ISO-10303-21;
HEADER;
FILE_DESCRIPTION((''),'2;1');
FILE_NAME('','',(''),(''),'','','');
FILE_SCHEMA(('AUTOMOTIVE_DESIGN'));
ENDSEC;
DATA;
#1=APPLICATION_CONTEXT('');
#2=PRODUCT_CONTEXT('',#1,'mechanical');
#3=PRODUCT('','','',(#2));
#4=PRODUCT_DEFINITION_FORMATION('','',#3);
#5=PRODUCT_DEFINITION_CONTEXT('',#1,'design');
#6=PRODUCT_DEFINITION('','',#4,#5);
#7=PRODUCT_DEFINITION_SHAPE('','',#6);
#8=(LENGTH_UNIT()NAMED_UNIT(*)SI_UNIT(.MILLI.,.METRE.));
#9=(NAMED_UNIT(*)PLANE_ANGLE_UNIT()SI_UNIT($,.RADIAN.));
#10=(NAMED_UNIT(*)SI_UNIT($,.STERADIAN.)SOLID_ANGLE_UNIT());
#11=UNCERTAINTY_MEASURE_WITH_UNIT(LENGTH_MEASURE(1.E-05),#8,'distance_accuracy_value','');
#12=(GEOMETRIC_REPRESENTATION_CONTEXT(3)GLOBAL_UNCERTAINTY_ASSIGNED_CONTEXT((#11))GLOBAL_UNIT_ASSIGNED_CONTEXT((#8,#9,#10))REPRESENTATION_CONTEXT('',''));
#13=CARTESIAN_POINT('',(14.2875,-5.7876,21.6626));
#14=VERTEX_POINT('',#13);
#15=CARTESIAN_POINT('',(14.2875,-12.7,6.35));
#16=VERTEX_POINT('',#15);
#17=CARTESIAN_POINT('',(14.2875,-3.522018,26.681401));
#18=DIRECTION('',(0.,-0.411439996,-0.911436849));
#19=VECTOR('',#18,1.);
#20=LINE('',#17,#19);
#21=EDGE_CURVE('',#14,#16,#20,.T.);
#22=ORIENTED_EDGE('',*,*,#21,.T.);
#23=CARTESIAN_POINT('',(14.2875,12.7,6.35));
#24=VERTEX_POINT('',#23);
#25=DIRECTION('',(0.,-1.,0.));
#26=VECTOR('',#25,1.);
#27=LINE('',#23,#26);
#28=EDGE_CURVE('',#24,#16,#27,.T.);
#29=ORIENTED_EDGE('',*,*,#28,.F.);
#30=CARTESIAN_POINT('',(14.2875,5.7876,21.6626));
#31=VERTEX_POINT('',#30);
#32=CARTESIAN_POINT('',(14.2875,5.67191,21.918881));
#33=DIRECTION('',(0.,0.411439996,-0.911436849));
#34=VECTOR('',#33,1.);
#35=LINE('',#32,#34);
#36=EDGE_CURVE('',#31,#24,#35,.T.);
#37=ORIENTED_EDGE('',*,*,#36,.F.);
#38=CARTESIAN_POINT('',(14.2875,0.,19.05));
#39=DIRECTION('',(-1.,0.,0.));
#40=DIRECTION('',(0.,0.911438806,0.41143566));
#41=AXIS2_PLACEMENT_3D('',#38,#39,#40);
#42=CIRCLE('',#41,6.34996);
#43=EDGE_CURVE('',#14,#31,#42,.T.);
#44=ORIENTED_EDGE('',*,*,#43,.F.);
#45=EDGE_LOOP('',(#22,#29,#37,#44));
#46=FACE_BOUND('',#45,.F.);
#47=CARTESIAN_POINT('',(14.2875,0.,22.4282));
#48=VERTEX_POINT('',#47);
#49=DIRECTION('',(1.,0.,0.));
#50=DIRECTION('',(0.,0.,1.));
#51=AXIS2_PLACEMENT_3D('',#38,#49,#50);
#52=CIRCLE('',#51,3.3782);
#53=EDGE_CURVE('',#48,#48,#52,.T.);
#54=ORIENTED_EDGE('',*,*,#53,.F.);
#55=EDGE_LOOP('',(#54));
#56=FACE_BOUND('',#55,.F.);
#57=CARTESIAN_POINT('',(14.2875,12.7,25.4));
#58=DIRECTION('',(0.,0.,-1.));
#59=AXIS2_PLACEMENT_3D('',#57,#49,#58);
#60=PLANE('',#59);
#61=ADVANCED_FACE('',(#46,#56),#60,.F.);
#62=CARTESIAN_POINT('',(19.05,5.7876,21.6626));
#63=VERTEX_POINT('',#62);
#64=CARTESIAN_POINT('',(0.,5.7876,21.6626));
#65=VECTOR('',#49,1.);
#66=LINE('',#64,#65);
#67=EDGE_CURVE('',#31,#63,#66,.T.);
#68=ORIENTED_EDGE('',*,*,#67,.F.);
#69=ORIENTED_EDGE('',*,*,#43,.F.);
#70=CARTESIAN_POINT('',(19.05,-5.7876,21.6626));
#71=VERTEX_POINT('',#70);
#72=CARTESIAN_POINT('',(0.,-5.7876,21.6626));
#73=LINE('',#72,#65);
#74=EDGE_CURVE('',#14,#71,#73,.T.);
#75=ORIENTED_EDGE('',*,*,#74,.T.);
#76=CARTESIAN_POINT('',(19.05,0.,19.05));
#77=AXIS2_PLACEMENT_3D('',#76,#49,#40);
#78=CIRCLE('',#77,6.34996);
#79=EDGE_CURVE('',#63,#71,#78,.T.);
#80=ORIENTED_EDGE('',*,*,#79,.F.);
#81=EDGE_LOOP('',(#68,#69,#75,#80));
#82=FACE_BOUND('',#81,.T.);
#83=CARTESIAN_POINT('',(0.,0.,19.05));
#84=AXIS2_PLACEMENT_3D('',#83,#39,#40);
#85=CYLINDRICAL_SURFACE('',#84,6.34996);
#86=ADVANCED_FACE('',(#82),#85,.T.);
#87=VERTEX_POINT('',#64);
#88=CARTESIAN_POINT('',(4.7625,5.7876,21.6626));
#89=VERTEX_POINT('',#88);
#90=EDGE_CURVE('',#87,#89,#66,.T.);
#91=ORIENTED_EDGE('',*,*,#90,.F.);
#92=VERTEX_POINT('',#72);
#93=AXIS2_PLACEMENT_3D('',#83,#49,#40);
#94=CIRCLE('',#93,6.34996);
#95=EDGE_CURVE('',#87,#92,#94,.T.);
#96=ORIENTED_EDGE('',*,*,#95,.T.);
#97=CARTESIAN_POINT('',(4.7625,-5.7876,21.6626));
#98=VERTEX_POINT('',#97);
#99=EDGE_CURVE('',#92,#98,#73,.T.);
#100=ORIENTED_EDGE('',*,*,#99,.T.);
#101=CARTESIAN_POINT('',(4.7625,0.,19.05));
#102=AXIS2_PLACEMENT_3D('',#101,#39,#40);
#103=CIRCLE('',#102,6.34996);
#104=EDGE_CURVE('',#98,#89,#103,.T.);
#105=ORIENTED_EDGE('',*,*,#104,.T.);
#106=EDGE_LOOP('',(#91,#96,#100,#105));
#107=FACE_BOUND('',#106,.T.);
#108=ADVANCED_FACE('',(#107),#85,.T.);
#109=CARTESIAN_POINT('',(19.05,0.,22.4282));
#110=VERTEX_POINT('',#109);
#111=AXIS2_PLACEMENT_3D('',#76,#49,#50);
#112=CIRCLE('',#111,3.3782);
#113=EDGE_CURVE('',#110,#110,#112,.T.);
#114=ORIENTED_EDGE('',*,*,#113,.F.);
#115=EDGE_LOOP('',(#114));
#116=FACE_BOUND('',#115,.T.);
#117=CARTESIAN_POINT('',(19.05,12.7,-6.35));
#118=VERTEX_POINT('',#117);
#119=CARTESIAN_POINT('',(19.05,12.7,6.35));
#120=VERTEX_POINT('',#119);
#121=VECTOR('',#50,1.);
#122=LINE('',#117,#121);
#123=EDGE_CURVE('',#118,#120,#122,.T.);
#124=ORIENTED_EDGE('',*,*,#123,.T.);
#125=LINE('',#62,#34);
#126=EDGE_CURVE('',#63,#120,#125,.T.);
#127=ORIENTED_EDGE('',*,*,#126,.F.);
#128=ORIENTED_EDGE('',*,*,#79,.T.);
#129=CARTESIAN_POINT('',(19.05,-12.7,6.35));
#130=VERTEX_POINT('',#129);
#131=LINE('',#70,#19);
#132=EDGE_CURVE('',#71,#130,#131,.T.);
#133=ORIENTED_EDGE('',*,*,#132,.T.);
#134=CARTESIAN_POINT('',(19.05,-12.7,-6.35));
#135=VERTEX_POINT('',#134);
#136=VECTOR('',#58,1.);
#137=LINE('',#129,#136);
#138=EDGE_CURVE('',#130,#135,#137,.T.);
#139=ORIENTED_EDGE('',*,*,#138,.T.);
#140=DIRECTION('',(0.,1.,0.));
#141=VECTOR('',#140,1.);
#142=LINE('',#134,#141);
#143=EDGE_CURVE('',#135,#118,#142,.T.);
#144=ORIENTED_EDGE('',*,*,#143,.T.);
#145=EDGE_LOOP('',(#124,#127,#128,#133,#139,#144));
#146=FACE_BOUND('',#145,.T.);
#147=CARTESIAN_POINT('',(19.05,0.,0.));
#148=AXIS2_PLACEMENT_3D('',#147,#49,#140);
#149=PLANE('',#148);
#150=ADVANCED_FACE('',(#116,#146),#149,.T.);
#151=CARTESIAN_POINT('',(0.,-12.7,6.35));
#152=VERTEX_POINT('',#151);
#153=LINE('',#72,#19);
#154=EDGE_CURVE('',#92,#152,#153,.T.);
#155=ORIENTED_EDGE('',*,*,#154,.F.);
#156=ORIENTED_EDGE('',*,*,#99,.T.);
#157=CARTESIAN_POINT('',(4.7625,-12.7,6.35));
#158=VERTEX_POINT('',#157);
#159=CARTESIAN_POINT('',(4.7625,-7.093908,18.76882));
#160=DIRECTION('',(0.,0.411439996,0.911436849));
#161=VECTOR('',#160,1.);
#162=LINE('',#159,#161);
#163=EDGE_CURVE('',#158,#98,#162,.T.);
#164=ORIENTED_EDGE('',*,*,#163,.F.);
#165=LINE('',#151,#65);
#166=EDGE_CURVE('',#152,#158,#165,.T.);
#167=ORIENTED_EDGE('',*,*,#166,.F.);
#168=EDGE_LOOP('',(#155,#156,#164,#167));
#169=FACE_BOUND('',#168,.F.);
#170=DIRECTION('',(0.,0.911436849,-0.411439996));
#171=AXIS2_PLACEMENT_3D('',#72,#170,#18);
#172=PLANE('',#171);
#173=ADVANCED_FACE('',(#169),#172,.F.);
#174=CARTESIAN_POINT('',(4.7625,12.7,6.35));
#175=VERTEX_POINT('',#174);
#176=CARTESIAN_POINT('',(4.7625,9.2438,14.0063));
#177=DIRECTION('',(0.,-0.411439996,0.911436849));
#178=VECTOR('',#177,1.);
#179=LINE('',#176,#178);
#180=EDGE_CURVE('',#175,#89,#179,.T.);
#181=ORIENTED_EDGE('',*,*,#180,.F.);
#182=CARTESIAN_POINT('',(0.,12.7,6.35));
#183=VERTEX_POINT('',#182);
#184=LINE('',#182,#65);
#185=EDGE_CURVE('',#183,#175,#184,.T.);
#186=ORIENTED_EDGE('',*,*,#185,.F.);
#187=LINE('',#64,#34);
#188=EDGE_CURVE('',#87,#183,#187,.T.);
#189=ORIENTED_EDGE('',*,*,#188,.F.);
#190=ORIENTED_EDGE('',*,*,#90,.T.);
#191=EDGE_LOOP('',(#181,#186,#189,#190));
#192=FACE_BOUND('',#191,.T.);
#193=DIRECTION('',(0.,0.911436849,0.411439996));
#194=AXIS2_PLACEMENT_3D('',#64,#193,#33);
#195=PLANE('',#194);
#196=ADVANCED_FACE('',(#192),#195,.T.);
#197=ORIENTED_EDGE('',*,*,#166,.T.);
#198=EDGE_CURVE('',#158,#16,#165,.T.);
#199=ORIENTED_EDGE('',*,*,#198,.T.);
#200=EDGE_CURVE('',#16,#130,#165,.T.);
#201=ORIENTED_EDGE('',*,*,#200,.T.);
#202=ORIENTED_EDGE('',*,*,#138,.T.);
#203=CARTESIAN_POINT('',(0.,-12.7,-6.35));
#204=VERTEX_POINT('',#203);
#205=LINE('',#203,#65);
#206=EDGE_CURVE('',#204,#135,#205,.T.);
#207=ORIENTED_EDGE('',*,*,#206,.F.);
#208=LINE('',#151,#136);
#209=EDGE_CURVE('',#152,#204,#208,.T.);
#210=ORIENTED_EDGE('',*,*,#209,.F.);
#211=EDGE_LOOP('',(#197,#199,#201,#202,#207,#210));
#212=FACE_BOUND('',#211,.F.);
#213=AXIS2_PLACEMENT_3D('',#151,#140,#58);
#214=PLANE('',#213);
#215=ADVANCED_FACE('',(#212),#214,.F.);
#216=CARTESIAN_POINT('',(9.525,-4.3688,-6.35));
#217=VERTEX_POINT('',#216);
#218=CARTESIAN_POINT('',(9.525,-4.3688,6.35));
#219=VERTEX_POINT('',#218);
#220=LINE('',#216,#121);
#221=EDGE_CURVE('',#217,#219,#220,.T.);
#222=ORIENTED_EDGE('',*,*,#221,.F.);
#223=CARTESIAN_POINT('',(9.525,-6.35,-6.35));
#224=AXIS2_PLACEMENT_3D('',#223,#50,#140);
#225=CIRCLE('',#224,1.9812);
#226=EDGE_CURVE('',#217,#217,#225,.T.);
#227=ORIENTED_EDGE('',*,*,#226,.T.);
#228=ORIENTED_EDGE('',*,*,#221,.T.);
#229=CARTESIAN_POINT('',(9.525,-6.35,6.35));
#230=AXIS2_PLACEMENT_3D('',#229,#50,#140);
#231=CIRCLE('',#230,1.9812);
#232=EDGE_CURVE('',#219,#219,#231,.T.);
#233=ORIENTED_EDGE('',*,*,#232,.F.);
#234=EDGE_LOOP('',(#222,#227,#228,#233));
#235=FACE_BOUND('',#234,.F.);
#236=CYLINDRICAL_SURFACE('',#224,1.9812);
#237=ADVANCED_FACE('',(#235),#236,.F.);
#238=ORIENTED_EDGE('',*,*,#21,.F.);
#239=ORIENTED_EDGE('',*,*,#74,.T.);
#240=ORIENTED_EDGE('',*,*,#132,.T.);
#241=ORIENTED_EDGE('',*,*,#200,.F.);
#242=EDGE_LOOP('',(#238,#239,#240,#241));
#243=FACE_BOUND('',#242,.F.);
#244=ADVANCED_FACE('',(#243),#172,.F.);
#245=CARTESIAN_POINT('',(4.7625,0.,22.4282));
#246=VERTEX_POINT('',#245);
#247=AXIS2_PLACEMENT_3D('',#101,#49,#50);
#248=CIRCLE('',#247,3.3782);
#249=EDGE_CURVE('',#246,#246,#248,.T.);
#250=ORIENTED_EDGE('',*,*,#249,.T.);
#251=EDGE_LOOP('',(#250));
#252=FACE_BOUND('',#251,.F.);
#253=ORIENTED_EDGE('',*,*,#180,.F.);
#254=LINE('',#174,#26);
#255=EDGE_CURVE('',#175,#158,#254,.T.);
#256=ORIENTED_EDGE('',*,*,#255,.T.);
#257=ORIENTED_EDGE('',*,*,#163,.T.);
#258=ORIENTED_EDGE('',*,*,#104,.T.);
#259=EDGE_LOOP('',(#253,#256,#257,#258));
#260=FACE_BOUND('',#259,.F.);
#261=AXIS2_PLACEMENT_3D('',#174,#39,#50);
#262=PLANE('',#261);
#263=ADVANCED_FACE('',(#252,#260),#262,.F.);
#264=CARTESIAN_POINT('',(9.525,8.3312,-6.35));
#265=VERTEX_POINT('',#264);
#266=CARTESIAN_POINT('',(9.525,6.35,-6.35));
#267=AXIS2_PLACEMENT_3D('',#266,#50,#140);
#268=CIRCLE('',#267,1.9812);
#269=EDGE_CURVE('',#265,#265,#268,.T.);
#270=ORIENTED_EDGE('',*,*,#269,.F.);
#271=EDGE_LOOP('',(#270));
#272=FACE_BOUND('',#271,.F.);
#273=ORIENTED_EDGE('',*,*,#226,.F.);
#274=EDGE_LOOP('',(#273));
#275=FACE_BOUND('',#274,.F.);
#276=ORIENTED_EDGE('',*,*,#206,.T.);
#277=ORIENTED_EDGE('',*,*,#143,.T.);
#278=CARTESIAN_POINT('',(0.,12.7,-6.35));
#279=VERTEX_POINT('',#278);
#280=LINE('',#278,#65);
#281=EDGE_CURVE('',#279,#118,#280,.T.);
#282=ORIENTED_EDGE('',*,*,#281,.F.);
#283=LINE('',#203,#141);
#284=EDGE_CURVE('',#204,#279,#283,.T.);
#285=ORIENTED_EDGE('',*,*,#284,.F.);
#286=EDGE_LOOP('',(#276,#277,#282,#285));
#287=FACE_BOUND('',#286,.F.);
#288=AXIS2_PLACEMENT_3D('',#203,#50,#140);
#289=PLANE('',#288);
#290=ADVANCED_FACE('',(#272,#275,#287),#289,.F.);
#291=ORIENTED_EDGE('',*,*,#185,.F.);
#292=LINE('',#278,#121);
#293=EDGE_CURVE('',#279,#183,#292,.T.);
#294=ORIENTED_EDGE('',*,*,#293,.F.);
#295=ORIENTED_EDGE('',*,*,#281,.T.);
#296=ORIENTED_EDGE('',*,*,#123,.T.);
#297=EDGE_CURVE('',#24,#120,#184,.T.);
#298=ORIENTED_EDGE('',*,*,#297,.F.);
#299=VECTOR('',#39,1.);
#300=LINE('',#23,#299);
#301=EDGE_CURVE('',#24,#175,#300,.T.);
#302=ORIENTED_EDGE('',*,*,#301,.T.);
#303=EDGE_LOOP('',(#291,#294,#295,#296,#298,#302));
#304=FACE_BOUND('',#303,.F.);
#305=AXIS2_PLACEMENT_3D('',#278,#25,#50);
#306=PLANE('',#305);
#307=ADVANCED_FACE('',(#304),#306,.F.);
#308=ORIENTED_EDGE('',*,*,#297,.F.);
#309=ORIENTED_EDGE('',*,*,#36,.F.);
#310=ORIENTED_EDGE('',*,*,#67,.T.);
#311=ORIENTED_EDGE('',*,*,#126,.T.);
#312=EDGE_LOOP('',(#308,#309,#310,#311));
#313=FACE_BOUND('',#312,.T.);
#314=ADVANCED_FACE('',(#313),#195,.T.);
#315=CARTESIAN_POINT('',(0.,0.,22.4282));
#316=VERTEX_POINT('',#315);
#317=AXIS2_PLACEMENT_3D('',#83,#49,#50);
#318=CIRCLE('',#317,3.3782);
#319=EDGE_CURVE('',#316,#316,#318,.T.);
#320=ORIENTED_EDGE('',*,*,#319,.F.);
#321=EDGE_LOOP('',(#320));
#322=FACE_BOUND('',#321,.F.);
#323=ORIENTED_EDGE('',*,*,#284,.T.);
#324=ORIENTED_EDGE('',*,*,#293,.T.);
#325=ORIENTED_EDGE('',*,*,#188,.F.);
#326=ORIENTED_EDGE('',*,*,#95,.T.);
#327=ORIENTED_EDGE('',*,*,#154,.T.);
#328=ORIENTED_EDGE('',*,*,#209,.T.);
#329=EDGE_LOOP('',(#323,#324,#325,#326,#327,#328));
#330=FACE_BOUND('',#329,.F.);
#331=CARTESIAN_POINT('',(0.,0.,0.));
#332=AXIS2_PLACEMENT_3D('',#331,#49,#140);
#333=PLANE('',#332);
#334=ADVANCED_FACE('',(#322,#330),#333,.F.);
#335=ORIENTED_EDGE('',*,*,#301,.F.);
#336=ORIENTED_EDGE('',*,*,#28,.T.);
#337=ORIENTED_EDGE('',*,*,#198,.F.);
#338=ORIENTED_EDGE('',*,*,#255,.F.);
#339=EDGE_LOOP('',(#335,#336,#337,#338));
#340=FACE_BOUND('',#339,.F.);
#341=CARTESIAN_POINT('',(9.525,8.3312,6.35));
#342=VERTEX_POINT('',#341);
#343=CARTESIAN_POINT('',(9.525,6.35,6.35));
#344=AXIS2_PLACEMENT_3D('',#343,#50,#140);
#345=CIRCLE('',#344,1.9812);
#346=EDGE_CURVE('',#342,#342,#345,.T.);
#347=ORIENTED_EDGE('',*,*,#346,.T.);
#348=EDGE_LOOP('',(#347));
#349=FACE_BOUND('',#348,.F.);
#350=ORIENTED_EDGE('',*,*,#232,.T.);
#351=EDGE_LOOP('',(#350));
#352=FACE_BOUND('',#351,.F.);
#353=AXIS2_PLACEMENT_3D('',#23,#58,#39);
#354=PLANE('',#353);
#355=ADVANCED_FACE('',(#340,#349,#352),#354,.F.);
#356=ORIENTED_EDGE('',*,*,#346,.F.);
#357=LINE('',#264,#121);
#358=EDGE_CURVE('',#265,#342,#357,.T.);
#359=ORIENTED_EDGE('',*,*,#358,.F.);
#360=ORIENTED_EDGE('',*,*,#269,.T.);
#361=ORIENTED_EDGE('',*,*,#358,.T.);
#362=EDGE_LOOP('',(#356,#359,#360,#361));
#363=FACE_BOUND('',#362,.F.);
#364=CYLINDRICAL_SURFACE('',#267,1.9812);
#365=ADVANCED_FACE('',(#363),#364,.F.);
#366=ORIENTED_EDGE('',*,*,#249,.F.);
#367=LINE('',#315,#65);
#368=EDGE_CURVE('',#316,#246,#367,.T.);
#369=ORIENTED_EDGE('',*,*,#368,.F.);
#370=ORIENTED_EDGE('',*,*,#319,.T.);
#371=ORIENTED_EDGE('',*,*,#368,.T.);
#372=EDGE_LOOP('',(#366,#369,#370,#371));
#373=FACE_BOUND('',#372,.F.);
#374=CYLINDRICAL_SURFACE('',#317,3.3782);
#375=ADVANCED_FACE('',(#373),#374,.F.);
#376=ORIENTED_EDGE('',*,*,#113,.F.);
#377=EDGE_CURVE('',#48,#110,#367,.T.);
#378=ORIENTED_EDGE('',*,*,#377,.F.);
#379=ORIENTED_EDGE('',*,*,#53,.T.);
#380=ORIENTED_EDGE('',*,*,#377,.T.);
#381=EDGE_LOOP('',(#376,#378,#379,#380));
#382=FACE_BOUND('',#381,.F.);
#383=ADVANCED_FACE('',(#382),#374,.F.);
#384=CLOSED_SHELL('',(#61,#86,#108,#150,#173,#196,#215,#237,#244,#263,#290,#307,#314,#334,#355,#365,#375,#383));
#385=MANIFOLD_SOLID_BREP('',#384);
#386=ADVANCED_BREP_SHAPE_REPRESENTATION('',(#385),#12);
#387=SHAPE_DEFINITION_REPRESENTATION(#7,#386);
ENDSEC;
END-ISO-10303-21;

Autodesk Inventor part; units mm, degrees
ref_plane "YZ Plane" through (0, 0, 0) normal (1, 0, 0) x (0, 1, 0)
ref_plane "XZ Plane" through (0, 0, 0) normal (0, 1, 0) x (-1, 0, 0)
ref_plane "XY Plane" through (0, 0, 0) normal (0, 0, 1) x (1, 0, 0)
sketch "Sketch1" plane through (0, 0, 0) normal (1, 0, 0) x (0, 1, 0)
  line L0 (12.7, 6.35) -> (-12.7, 6.35) construction
  line L1 (-12.7, 6.35) -> (-12.7, -6.35)
  line L2 (-12.7, -6.35) -> (12.7, -6.35)
  line L3 (12.7, -6.35) -> (12.7, 6.35)
  line L4 (12.7, 6.35) -> (-12.7, -6.35) construction
  line L5 (-12.7, 6.35) -> (12.7, -6.35) construction
  circle A0 centre (0, 19.05) radius 6.35 construction
  line L6 (5.7876, 21.6626) -> (12.7, 6.35)
  line L7 (-5.7876, 21.6626) -> (-12.7, 6.35)
  arc A1 (5.7876, 21.6626) -> (-5.7876, 21.6626) centre (0, 19.05) ccw
  point P0 (0, 0)
  point P1 (0, 6.35)
  dimension "d0" = 25.4
  dimension "d1" = 12.7
  dimension "d2" = 12.7
  dimension "d3" = 12.7
extrude "Extrusion1" add sketch "Sketch1" along normal blind 19.05
hole "Hole1" at (0, 0, 19.05) direction (1, 0, 0) diameter 6.7564 end through all clearance for "Flat Head Machine Screw (82)" size "1/4" standard "Ansi Unified Screw Threads"
sketch "Sketch2" plane through (0, -12.7, -6.35) normal (0, 0, -1) x (-1, 0, 0)
  line L0 (0, 25.4) -> (-19.05, 25.4) construction
  line L1 (0, 0) -> (-19.05, 0) construction
  line L2 (-9.525, 19.05) -> (-9.525, 6.35) construction
  line L3 (0, 0) -> (0, 25.4) construction
  point P0 (0, 12.7)
  point P1 (-9.525, 25.4)
  point P2 (-9.525, 0)
  point P3 (-9.525, 12.7)
  point P4 (0, 12.7)
  dimension "d13" = 12.7
hole "Hole2" at (9.525, 6.35, -6.35) at (9.525, -6.35, -6.35) direction (0, 0, 1) diameter 3.9624 depth 13.6144 tip angle 118 thread size "10-32 UNF" class "2B" standard "ANSI Unified Screw Threads"
sketch "Sketch3" plane through (0, 12.7, 6.35) normal (0, 1, 0) x (1, 0, 0)
  line L0 (0, -15.3126) -> (0, -15.3126) construction
  line L1 (0, -15.3126) -> (19.05, -15.3126) construction
  line L2 (19.05, -15.3126) -> (19.05, -15.3126) construction
  line L3 (0, -15.3126) -> (19.05, -15.3126) construction
  line L4 (0, 0) -> (0, -15.3126) construction
  line L5 (0, -15.3126) -> (19.05, -15.3126) construction
  line L6 (19.05, 0) -> (19.05, -15.3126) construction
  line L7 (0, 0) -> (19.05, 0) construction
  line L8 (0, 12.7) -> (0, 0) construction
  line L9 (0, 0) -> (19.05, 0) construction
  line L10 (19.05, 12.7) -> (19.05, 0) construction
  line L11 (0, 12.7) -> (19.05, 12.7) construction
  line L12 (0, -19.05) -> (19.05, -19.05) construction
  line L13 (4.7625, -19.05) -> (14.2875, -19.05)
  line L14 (14.2875, -19.05) -> (14.2875, 0)
  line L15 (14.2875, 0) -> (4.7625, 0)
  line L16 (4.7625, 0) -> (4.7625, -19.05)
  point P0 (0, 6.35)
  point P1 (9.525, -19.05)
  point P2 (9.525, -19.05)
  dimension "d21" = 9.525
  dimension "d22" = 19.05
extrude "Extrusion2" cut sketch "Sketch3" against normal through all
properties part number "EL2-026-minusfillet" material "Aluminum 6061"
